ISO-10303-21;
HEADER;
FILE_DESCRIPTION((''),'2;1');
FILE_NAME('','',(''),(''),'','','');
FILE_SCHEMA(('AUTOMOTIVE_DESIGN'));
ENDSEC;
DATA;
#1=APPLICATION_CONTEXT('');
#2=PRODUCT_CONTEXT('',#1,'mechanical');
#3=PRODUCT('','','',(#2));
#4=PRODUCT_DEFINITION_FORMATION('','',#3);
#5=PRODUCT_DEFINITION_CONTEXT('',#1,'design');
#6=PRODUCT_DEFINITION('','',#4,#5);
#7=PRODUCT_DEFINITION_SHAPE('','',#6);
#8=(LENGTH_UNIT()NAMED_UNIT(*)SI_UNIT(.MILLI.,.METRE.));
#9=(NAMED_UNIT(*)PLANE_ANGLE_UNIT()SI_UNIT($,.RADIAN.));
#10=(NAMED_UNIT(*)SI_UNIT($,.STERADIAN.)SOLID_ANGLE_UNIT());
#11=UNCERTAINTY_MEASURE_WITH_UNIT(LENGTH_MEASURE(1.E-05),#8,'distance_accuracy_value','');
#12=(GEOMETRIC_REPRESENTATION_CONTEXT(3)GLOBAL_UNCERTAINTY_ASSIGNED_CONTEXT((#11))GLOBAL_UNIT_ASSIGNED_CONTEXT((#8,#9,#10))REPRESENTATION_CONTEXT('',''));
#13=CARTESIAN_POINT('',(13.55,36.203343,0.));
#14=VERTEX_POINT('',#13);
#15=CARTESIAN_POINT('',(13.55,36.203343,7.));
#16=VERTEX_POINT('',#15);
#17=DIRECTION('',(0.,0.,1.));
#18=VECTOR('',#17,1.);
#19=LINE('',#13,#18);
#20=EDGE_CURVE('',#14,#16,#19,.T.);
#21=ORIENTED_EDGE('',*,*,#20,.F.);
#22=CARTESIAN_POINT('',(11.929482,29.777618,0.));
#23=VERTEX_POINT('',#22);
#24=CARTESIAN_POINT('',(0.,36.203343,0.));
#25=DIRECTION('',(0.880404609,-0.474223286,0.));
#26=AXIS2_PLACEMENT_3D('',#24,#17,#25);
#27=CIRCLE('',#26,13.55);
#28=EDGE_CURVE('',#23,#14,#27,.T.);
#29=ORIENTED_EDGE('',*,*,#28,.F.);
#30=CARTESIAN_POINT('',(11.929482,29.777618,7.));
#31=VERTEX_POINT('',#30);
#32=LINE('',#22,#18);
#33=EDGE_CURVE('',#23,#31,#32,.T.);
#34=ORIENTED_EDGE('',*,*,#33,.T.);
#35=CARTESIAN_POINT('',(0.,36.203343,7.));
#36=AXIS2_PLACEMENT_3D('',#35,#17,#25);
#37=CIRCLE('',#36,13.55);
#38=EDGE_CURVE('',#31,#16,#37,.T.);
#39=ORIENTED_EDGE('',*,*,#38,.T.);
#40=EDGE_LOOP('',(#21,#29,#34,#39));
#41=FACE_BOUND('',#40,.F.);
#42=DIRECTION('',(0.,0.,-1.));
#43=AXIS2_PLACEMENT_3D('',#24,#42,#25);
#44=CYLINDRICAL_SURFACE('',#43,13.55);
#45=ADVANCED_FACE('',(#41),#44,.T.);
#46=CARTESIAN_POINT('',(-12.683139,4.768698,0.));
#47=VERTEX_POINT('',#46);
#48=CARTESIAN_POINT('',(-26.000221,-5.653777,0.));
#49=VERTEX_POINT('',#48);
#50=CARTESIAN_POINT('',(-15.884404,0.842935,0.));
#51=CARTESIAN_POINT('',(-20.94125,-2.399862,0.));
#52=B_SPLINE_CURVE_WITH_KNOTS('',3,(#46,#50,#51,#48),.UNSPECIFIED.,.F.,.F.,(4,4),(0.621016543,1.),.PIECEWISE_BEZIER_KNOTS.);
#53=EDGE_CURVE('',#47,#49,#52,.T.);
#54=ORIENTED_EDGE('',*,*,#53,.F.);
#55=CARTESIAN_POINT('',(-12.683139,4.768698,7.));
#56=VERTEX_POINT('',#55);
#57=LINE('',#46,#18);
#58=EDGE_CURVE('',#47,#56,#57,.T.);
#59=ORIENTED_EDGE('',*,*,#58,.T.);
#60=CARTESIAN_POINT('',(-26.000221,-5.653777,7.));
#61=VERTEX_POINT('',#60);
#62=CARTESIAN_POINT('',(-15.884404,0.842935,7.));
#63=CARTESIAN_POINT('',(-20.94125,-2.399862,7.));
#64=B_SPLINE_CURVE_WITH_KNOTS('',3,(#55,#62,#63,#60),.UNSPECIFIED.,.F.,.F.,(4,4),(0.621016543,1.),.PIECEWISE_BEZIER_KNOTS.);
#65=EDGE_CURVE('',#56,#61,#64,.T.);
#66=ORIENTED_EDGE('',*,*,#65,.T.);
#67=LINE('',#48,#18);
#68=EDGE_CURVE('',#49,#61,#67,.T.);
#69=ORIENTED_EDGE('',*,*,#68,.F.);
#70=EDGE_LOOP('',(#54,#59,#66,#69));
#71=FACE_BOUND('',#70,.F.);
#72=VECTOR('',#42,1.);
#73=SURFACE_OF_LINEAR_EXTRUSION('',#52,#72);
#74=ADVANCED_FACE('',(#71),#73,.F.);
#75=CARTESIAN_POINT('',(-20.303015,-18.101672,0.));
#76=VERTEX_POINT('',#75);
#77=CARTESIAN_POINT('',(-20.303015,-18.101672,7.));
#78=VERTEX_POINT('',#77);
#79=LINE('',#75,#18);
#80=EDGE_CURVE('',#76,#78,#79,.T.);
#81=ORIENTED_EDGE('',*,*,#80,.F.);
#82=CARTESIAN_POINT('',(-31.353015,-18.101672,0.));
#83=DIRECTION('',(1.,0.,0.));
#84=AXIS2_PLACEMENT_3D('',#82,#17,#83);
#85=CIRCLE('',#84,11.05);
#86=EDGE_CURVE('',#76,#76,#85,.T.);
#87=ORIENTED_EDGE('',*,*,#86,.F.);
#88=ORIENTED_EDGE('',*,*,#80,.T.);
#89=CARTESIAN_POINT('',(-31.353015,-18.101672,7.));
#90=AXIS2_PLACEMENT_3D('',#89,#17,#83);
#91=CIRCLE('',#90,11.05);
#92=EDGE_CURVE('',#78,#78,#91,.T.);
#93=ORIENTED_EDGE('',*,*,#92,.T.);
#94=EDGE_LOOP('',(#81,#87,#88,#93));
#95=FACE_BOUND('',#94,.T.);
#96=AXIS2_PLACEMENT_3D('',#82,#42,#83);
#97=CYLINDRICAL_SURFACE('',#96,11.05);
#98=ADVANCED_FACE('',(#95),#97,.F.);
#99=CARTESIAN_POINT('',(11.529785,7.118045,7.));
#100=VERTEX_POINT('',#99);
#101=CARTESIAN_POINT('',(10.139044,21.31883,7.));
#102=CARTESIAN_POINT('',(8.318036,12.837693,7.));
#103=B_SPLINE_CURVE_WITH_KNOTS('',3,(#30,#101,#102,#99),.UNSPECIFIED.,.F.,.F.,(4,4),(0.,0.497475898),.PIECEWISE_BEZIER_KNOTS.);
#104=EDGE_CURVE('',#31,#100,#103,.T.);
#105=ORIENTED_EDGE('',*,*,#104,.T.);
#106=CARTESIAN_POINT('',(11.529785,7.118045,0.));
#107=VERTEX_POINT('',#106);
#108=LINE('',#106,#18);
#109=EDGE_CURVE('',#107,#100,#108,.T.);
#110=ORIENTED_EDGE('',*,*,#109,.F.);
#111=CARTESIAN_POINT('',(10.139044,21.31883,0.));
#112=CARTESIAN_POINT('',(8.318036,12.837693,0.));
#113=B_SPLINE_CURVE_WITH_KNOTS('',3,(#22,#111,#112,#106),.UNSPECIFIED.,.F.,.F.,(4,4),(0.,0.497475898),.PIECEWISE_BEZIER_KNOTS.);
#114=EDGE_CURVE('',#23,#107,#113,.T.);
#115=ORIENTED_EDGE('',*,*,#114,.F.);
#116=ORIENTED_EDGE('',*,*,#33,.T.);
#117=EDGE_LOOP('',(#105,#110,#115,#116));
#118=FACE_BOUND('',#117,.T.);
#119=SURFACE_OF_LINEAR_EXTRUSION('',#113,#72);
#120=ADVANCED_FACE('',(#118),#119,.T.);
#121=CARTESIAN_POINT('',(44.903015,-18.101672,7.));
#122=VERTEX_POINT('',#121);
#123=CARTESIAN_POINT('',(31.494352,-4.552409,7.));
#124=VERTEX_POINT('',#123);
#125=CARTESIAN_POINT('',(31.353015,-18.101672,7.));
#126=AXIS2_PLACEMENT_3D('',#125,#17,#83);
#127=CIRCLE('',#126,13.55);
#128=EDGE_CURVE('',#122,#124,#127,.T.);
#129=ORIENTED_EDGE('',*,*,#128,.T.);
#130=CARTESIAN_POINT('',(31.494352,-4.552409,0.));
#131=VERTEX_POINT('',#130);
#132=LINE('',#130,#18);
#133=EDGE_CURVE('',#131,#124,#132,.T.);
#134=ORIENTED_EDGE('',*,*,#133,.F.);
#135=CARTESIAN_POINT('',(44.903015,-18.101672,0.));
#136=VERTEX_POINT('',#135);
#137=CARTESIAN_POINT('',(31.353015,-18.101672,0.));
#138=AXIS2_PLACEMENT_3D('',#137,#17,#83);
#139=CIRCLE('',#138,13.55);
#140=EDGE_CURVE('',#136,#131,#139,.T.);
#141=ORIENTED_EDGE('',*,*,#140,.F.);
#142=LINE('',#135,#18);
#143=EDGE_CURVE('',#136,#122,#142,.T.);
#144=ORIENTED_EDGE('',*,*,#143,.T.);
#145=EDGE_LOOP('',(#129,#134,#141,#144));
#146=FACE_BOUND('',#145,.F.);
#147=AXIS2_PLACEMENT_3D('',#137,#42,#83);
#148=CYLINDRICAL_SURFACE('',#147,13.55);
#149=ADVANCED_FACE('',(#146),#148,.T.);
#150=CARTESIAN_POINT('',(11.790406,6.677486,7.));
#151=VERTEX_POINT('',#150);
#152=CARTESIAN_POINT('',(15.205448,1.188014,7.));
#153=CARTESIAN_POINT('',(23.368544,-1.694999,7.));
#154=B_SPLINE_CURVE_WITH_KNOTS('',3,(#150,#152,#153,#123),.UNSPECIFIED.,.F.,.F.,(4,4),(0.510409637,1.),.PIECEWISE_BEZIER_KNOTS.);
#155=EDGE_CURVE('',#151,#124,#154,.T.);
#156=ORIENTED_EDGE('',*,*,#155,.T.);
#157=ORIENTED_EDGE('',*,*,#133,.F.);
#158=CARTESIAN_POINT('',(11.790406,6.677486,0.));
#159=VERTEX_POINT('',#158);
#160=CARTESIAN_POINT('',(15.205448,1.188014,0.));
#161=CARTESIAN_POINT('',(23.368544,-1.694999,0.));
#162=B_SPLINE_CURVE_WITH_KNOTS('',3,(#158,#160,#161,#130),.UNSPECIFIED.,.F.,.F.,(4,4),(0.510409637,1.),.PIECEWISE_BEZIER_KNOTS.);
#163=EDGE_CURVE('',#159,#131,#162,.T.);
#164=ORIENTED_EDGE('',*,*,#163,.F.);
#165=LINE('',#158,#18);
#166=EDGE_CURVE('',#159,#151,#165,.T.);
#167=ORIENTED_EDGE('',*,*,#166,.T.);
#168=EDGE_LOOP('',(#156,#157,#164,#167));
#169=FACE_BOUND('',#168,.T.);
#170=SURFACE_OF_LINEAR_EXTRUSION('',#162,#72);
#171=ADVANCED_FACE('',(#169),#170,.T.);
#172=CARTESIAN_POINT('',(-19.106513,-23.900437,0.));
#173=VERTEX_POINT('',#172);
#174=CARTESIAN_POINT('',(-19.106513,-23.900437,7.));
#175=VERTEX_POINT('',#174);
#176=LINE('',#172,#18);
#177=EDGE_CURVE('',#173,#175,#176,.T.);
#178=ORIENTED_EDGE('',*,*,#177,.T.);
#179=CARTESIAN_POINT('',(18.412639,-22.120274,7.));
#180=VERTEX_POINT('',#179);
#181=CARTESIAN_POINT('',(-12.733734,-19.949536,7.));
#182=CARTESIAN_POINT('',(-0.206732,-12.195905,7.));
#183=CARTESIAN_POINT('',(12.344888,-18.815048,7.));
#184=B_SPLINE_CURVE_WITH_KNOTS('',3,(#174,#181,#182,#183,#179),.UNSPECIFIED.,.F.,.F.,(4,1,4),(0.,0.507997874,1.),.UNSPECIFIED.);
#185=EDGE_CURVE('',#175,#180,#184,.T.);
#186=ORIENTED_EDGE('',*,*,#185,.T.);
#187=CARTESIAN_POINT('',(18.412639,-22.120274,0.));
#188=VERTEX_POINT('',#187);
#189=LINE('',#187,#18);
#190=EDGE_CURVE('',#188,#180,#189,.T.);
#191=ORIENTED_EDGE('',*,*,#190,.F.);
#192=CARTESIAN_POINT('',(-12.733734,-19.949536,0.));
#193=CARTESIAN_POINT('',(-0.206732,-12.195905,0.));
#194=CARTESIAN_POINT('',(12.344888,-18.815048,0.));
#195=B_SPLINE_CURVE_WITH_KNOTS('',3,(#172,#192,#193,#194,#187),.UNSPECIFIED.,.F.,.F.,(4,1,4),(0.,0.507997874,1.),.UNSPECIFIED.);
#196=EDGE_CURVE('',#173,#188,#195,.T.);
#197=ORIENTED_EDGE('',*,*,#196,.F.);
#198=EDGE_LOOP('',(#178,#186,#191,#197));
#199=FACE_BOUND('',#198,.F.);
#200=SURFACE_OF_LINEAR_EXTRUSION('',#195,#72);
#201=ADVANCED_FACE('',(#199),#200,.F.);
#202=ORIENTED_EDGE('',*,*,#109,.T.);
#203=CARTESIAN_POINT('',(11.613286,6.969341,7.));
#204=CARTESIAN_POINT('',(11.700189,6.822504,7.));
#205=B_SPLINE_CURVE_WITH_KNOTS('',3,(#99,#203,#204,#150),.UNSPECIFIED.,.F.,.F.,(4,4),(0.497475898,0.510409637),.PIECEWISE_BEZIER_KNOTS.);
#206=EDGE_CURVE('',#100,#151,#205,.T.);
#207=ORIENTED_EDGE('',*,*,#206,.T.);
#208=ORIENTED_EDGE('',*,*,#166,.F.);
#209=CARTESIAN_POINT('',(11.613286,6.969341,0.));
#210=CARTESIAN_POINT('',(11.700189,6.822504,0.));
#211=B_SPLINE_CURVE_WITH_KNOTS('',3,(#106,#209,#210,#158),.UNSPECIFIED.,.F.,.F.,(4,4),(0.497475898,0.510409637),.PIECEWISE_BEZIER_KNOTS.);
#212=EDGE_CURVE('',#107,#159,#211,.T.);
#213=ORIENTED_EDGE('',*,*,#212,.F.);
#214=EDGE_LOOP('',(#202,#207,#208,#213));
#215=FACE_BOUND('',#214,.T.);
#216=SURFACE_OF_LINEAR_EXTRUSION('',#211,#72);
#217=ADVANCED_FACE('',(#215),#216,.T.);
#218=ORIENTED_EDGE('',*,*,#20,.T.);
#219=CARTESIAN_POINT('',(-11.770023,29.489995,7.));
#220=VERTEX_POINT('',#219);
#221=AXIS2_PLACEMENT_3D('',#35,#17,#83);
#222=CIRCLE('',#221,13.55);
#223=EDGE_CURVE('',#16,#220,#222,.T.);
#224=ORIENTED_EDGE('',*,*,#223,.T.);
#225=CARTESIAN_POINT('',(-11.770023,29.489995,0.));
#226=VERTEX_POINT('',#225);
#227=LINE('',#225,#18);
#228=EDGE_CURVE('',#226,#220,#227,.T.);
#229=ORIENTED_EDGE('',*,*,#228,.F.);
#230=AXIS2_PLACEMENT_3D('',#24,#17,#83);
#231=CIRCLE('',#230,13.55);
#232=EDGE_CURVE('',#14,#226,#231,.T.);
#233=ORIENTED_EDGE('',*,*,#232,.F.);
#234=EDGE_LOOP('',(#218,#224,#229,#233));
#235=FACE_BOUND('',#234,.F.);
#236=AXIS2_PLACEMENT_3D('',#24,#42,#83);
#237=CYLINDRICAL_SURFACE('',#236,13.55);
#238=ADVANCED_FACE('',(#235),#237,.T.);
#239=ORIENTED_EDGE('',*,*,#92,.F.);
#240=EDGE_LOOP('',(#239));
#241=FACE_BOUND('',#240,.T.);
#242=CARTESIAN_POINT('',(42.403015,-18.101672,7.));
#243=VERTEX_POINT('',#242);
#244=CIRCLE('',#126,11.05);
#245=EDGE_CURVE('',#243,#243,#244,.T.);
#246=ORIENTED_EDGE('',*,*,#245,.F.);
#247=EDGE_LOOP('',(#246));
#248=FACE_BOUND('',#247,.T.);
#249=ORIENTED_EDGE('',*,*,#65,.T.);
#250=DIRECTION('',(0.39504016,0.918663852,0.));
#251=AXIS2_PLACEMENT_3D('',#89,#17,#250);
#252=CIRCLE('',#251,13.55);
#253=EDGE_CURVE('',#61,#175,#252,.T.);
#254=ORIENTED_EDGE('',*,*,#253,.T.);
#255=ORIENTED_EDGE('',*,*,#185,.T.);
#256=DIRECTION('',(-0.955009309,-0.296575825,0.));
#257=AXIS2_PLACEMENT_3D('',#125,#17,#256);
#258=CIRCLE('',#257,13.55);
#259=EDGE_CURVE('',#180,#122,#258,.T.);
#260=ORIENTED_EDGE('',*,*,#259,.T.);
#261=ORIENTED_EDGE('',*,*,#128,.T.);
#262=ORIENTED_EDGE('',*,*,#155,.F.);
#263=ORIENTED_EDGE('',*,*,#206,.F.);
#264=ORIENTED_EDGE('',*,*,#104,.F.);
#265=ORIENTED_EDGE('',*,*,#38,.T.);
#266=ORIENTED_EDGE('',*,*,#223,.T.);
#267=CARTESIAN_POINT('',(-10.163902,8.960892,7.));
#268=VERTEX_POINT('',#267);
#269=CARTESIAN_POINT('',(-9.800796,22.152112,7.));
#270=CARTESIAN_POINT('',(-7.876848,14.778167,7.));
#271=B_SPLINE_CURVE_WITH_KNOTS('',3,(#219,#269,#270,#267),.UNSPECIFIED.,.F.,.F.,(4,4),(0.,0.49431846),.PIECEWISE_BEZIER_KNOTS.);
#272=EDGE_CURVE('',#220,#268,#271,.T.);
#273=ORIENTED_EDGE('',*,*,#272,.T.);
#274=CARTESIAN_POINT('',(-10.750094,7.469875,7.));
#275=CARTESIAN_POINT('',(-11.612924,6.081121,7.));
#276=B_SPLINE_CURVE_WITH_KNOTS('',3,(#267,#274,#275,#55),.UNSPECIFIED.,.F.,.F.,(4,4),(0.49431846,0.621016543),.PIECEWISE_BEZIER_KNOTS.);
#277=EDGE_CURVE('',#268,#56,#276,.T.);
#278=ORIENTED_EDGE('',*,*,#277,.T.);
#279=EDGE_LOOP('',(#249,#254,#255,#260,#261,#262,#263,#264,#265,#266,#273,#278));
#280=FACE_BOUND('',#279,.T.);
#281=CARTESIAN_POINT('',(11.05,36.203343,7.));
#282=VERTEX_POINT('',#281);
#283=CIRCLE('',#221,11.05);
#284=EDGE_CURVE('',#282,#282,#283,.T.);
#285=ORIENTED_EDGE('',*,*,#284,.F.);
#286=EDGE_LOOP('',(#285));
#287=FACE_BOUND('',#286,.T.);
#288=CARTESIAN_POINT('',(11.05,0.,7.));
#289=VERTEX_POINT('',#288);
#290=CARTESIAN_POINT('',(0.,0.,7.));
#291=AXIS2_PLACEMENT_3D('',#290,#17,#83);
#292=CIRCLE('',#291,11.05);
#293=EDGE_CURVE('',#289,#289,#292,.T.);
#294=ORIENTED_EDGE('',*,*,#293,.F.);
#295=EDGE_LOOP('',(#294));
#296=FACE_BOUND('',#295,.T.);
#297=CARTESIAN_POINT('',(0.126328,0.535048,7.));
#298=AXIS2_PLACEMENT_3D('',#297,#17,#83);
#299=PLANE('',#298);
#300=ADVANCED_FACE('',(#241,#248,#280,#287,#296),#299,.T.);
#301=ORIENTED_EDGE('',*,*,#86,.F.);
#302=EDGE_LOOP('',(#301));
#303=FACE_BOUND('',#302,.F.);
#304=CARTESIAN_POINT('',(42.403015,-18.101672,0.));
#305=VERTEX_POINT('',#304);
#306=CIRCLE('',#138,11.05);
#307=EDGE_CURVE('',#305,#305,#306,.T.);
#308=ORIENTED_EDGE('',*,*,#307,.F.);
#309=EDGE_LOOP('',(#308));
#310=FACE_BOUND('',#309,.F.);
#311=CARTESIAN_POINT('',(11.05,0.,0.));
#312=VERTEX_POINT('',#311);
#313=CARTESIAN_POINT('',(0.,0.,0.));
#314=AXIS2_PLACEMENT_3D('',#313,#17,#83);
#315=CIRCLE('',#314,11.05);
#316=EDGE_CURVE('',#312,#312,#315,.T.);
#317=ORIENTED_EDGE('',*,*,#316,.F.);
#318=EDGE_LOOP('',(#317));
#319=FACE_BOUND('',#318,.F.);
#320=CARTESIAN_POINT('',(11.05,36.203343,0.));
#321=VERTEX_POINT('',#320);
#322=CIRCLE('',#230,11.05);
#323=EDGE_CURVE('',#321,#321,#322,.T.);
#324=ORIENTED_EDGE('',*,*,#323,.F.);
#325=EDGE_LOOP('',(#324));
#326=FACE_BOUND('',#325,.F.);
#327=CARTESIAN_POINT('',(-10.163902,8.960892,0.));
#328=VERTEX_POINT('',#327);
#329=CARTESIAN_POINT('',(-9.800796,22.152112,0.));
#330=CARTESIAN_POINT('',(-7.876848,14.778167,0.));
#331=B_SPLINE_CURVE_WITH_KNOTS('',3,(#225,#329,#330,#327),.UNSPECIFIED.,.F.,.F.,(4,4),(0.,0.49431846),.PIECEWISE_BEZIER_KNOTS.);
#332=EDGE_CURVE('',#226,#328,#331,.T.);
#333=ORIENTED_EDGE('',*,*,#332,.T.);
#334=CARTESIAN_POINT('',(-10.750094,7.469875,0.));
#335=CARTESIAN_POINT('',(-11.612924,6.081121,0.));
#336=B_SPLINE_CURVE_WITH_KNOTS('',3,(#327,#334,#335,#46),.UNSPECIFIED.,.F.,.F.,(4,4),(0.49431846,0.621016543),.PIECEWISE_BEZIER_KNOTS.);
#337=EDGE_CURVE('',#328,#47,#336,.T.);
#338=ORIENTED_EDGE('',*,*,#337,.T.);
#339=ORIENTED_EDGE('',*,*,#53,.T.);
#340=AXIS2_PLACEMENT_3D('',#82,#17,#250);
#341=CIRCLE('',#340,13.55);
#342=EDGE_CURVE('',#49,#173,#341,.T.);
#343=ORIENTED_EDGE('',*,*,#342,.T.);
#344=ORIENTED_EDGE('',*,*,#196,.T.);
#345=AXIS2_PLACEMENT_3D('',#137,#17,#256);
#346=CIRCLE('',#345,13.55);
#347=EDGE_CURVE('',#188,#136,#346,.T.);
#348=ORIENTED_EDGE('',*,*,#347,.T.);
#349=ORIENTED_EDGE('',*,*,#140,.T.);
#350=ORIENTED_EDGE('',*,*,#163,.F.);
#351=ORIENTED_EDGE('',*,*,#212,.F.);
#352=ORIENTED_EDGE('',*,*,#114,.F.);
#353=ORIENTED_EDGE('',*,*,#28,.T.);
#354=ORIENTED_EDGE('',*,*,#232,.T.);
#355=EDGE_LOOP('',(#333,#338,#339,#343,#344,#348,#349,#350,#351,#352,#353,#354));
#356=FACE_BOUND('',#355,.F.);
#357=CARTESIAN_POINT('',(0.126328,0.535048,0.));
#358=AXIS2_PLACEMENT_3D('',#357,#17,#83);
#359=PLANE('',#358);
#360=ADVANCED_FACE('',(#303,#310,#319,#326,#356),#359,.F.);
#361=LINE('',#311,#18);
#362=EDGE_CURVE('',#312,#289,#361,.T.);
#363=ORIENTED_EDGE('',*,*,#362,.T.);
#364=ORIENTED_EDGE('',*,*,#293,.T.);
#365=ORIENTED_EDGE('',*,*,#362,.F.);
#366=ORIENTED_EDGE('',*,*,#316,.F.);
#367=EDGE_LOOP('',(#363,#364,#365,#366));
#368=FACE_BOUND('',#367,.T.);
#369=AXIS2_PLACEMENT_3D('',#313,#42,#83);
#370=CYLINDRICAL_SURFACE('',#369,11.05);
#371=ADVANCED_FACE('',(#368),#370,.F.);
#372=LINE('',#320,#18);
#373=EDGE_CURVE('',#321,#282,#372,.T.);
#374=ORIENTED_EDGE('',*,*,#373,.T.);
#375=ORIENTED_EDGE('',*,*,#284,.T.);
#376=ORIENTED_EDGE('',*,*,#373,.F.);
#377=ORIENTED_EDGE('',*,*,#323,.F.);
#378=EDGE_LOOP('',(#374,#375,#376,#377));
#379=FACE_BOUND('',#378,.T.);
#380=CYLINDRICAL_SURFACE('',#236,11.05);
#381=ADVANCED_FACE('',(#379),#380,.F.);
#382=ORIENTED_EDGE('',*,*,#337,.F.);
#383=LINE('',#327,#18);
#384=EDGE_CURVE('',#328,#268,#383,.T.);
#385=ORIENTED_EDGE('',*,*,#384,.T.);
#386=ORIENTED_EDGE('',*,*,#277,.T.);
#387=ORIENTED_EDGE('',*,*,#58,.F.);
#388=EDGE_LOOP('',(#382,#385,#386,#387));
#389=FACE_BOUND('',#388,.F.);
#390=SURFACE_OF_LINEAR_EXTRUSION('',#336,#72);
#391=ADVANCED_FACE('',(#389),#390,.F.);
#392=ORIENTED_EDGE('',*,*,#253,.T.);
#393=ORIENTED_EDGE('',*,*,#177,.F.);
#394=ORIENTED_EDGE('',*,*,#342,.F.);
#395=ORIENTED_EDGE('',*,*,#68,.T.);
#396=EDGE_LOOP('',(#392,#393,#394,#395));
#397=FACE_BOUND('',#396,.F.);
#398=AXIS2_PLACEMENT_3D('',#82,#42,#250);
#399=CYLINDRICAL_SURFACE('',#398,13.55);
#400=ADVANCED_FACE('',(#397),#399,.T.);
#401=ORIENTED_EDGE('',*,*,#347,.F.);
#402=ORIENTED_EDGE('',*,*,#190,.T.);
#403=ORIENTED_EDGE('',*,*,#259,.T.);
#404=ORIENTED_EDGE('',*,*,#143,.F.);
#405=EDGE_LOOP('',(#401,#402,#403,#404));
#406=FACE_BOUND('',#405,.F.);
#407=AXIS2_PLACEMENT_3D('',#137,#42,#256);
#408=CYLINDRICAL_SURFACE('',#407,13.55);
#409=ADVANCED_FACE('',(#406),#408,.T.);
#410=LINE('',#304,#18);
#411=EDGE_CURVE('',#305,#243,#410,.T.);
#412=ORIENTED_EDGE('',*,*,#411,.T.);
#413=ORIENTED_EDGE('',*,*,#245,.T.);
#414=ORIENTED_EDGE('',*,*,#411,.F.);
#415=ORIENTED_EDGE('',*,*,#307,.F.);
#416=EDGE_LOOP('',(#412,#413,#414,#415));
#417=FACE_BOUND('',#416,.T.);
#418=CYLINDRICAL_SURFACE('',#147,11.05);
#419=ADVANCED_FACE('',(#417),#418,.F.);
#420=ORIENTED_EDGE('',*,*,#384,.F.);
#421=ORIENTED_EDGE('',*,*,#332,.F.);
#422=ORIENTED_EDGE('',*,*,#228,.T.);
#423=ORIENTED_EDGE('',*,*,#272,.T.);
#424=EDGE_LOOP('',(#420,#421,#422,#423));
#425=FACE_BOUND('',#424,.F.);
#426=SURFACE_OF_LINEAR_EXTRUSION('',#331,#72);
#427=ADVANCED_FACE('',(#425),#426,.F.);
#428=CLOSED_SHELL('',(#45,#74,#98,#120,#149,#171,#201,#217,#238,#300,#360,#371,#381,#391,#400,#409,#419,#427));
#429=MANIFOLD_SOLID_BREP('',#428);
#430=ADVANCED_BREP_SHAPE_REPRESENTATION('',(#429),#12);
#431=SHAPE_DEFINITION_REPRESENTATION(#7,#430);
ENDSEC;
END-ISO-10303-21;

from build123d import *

# Parameters (mm, degrees)
F0_R     = 11.05
F1_DEPTH = 7


with BuildPart() as f1:
    # F0 (on Top) → F1 (new body)
    with BuildSketch(Plane.XY):
        with BuildLine():
            ThreePointArc((-12.6831392694, 4.7686977545), (-2.4234234979, -13.3315234895), (13.55, 0))
            ThreePointArc((13.55, 0), (13.1027192195, 3.4527161853), (11.7904060434, 6.6774864532))
            add(Edge.make_bspline(
                [(11.5297847403, 7.1180449452), (11.6132861066, 6.969341391), (11.7001892822, 6.8225044208), (11.7904060434, 6.6774864532)],
                knots=[0.4974758981, 0.4974758981, 0.4974758981, 0.4974758981, 0.5104096373, 0.5104096373, 0.5104096373, 0.5104096373], degree=3))
            ThreePointArc((11.5297847403, 7.1180449452), (1.1469220688, 13.5013728846), (-10.1639023184, 8.9608922359))
            add(Edge.make_bspline(
                [(-10.1639023184, 8.9608922359), (-10.7500939319, 7.4698745289), (-11.6129235501, 6.081120856), (-12.6831392694, 4.7686977545)],
                knots=[0.4943184599, 0.4943184599, 0.4943184599, 0.4943184599, 0.6210165425, 0.6210165425, 0.6210165425, 0.6210165425], degree=3))
        make_face()
        Circle(F0_R, mode=Mode.SUBTRACT)
        with BuildLine():
            ThreePointArc((11.7904060434, 6.6774864532), (13.1027192195, 3.4527161853), (13.55, 0))
            ThreePointArc((13.55, 0), (-2.4234234979, -13.3315234895), (-12.6831392694, 4.7686977545))
            add(Edge.make_bspline(
                [(-12.6831392694, 4.7686977545), (-15.884403608, 0.8429347549), (-20.9412495964, -2.399862478), (-26.0002209429, -5.6537765206)],
                knots=[0.6210165425, 0.6210165425, 0.6210165425, 0.6210165425, 1, 1, 1, 1], degree=3))
            ThreePointArc((-26.0002209429, -5.6537765206), (-20.0363711479, -10.649419061), (-17.8030151047, -18.1016717106))
            ThreePointArc((-17.8030151047, -18.1016717106), (-18.1329053392, -21.0734048392), (-19.1065129332, -23.9004374898))
            add(Edge.make_bspline(
                [(-19.1065129332, -23.9004374898), (-12.7337335325, -19.9495363252), (-0.2067317894, -12.1959048864), (12.344888234, -18.8150479155), (18.4126389706, -22.1202741428)],
                knots=[0, 0, 0, 0, 0.5079978735, 1, 1, 1, 1], degree=3))
            ThreePointArc((18.4126389706, -22.1202741428), (20.4851117611, -10.0090097929), (31.4943521465, -4.5524088583))
            add(Edge.make_bspline(
                [(11.7904060434, 6.6774864532), (15.2054475833, 1.1880144624), (23.3685436118, -1.6949988805), (31.4943521465, -4.5524088583)],
                knots=[0.5104096373, 0.5104096373, 0.5104096373, 0.5104096373, 1, 1, 1, 1], degree=3))
        make_face()
        with BuildLine():
            ThreePointArc((-10.1639023184, 8.9608922359), (1.1469220688, 13.5013728846), (11.5297847403, 7.1180449452))
            add(Edge.make_bspline(
                [(11.9294824461, 29.7776178927), (10.1390437597, 21.3188304105), (8.3180362773, 12.8376928177), (11.5297847403, 7.1180449452)],
                knots=[0, 0, 0, 0, 0.4974758981, 0.4974758981, 0.4974758981, 0.4974758981], degree=3))
            ThreePointArc((11.9294824461, 29.7776178927), (0.164433974, 22.6543411898), (-11.7700234604, 29.4899949467))
            add(Edge.make_bspline(
                [(-11.7700234604, 29.4899949467), (-9.8007963488, 22.152111828), (-7.8768484836, 14.7781671429), (-10.1639023184, 8.9608922359)],
                knots=[0, 0, 0, 0, 0.4943184599, 0.4943184599, 0.4943184599, 0.4943184599], degree=3))
        make_face()
        with BuildLine():
            ThreePointArc((44.9030151047, -18.1016717106), (40.9841525484, -8.5704760069), (31.4943521465, -4.5524088583))
            ThreePointArc((31.4943521465, -4.5524088583), (20.4851117611, -10.0090097929), (18.4126389706, -22.1202741428))
            ThreePointArc((18.4126389706, -22.1202741428), (33.3853048703, -31.4983988597), (44.9030151047, -18.1016717106))
        make_face()
        with Locations((31.3530151047, -18.1016717106)):
            Circle(F0_R, mode=Mode.SUBTRACT)
        with BuildLine():
            ThreePointArc((-17.8030151047, -18.1016717106), (-20.0363711479, -10.649419061), (-26.0002209429, -5.6537765206))
            ThreePointArc((-26.0002209429, -5.6537765206), (-44.028541405, -22.8905685576), (-19.1065129332, -23.9004374898))
            ThreePointArc((-19.1065129332, -23.9004374898), (-18.1329053392, -21.0734048392), (-17.8030151047, -18.1016717106))
        make_face()
        with Locations((-31.3530151047, -18.1016717106)):
            Circle(F0_R, mode=Mode.SUBTRACT)
        with BuildLine():
            ThreePointArc((-11.7700234604, 29.4899949467), (0.164433974, 22.6543411898), (11.9294824461, 29.7776178927))
            ThreePointArc((11.9294824461, 29.7776178927), (13.1386260154, 32.8898850425), (13.55, 36.2033434212))
            ThreePointArc((13.55, 36.2033434212), (-3.472656196, 49.3007919874), (-11.7700234604, 29.4899949467))
        make_face()
        with Locations((0, 36.2033434212)):
            Circle(F0_R, mode=Mode.SUBTRACT)
    extrude(amount=F1_DEPTH)


solid = f1.part
